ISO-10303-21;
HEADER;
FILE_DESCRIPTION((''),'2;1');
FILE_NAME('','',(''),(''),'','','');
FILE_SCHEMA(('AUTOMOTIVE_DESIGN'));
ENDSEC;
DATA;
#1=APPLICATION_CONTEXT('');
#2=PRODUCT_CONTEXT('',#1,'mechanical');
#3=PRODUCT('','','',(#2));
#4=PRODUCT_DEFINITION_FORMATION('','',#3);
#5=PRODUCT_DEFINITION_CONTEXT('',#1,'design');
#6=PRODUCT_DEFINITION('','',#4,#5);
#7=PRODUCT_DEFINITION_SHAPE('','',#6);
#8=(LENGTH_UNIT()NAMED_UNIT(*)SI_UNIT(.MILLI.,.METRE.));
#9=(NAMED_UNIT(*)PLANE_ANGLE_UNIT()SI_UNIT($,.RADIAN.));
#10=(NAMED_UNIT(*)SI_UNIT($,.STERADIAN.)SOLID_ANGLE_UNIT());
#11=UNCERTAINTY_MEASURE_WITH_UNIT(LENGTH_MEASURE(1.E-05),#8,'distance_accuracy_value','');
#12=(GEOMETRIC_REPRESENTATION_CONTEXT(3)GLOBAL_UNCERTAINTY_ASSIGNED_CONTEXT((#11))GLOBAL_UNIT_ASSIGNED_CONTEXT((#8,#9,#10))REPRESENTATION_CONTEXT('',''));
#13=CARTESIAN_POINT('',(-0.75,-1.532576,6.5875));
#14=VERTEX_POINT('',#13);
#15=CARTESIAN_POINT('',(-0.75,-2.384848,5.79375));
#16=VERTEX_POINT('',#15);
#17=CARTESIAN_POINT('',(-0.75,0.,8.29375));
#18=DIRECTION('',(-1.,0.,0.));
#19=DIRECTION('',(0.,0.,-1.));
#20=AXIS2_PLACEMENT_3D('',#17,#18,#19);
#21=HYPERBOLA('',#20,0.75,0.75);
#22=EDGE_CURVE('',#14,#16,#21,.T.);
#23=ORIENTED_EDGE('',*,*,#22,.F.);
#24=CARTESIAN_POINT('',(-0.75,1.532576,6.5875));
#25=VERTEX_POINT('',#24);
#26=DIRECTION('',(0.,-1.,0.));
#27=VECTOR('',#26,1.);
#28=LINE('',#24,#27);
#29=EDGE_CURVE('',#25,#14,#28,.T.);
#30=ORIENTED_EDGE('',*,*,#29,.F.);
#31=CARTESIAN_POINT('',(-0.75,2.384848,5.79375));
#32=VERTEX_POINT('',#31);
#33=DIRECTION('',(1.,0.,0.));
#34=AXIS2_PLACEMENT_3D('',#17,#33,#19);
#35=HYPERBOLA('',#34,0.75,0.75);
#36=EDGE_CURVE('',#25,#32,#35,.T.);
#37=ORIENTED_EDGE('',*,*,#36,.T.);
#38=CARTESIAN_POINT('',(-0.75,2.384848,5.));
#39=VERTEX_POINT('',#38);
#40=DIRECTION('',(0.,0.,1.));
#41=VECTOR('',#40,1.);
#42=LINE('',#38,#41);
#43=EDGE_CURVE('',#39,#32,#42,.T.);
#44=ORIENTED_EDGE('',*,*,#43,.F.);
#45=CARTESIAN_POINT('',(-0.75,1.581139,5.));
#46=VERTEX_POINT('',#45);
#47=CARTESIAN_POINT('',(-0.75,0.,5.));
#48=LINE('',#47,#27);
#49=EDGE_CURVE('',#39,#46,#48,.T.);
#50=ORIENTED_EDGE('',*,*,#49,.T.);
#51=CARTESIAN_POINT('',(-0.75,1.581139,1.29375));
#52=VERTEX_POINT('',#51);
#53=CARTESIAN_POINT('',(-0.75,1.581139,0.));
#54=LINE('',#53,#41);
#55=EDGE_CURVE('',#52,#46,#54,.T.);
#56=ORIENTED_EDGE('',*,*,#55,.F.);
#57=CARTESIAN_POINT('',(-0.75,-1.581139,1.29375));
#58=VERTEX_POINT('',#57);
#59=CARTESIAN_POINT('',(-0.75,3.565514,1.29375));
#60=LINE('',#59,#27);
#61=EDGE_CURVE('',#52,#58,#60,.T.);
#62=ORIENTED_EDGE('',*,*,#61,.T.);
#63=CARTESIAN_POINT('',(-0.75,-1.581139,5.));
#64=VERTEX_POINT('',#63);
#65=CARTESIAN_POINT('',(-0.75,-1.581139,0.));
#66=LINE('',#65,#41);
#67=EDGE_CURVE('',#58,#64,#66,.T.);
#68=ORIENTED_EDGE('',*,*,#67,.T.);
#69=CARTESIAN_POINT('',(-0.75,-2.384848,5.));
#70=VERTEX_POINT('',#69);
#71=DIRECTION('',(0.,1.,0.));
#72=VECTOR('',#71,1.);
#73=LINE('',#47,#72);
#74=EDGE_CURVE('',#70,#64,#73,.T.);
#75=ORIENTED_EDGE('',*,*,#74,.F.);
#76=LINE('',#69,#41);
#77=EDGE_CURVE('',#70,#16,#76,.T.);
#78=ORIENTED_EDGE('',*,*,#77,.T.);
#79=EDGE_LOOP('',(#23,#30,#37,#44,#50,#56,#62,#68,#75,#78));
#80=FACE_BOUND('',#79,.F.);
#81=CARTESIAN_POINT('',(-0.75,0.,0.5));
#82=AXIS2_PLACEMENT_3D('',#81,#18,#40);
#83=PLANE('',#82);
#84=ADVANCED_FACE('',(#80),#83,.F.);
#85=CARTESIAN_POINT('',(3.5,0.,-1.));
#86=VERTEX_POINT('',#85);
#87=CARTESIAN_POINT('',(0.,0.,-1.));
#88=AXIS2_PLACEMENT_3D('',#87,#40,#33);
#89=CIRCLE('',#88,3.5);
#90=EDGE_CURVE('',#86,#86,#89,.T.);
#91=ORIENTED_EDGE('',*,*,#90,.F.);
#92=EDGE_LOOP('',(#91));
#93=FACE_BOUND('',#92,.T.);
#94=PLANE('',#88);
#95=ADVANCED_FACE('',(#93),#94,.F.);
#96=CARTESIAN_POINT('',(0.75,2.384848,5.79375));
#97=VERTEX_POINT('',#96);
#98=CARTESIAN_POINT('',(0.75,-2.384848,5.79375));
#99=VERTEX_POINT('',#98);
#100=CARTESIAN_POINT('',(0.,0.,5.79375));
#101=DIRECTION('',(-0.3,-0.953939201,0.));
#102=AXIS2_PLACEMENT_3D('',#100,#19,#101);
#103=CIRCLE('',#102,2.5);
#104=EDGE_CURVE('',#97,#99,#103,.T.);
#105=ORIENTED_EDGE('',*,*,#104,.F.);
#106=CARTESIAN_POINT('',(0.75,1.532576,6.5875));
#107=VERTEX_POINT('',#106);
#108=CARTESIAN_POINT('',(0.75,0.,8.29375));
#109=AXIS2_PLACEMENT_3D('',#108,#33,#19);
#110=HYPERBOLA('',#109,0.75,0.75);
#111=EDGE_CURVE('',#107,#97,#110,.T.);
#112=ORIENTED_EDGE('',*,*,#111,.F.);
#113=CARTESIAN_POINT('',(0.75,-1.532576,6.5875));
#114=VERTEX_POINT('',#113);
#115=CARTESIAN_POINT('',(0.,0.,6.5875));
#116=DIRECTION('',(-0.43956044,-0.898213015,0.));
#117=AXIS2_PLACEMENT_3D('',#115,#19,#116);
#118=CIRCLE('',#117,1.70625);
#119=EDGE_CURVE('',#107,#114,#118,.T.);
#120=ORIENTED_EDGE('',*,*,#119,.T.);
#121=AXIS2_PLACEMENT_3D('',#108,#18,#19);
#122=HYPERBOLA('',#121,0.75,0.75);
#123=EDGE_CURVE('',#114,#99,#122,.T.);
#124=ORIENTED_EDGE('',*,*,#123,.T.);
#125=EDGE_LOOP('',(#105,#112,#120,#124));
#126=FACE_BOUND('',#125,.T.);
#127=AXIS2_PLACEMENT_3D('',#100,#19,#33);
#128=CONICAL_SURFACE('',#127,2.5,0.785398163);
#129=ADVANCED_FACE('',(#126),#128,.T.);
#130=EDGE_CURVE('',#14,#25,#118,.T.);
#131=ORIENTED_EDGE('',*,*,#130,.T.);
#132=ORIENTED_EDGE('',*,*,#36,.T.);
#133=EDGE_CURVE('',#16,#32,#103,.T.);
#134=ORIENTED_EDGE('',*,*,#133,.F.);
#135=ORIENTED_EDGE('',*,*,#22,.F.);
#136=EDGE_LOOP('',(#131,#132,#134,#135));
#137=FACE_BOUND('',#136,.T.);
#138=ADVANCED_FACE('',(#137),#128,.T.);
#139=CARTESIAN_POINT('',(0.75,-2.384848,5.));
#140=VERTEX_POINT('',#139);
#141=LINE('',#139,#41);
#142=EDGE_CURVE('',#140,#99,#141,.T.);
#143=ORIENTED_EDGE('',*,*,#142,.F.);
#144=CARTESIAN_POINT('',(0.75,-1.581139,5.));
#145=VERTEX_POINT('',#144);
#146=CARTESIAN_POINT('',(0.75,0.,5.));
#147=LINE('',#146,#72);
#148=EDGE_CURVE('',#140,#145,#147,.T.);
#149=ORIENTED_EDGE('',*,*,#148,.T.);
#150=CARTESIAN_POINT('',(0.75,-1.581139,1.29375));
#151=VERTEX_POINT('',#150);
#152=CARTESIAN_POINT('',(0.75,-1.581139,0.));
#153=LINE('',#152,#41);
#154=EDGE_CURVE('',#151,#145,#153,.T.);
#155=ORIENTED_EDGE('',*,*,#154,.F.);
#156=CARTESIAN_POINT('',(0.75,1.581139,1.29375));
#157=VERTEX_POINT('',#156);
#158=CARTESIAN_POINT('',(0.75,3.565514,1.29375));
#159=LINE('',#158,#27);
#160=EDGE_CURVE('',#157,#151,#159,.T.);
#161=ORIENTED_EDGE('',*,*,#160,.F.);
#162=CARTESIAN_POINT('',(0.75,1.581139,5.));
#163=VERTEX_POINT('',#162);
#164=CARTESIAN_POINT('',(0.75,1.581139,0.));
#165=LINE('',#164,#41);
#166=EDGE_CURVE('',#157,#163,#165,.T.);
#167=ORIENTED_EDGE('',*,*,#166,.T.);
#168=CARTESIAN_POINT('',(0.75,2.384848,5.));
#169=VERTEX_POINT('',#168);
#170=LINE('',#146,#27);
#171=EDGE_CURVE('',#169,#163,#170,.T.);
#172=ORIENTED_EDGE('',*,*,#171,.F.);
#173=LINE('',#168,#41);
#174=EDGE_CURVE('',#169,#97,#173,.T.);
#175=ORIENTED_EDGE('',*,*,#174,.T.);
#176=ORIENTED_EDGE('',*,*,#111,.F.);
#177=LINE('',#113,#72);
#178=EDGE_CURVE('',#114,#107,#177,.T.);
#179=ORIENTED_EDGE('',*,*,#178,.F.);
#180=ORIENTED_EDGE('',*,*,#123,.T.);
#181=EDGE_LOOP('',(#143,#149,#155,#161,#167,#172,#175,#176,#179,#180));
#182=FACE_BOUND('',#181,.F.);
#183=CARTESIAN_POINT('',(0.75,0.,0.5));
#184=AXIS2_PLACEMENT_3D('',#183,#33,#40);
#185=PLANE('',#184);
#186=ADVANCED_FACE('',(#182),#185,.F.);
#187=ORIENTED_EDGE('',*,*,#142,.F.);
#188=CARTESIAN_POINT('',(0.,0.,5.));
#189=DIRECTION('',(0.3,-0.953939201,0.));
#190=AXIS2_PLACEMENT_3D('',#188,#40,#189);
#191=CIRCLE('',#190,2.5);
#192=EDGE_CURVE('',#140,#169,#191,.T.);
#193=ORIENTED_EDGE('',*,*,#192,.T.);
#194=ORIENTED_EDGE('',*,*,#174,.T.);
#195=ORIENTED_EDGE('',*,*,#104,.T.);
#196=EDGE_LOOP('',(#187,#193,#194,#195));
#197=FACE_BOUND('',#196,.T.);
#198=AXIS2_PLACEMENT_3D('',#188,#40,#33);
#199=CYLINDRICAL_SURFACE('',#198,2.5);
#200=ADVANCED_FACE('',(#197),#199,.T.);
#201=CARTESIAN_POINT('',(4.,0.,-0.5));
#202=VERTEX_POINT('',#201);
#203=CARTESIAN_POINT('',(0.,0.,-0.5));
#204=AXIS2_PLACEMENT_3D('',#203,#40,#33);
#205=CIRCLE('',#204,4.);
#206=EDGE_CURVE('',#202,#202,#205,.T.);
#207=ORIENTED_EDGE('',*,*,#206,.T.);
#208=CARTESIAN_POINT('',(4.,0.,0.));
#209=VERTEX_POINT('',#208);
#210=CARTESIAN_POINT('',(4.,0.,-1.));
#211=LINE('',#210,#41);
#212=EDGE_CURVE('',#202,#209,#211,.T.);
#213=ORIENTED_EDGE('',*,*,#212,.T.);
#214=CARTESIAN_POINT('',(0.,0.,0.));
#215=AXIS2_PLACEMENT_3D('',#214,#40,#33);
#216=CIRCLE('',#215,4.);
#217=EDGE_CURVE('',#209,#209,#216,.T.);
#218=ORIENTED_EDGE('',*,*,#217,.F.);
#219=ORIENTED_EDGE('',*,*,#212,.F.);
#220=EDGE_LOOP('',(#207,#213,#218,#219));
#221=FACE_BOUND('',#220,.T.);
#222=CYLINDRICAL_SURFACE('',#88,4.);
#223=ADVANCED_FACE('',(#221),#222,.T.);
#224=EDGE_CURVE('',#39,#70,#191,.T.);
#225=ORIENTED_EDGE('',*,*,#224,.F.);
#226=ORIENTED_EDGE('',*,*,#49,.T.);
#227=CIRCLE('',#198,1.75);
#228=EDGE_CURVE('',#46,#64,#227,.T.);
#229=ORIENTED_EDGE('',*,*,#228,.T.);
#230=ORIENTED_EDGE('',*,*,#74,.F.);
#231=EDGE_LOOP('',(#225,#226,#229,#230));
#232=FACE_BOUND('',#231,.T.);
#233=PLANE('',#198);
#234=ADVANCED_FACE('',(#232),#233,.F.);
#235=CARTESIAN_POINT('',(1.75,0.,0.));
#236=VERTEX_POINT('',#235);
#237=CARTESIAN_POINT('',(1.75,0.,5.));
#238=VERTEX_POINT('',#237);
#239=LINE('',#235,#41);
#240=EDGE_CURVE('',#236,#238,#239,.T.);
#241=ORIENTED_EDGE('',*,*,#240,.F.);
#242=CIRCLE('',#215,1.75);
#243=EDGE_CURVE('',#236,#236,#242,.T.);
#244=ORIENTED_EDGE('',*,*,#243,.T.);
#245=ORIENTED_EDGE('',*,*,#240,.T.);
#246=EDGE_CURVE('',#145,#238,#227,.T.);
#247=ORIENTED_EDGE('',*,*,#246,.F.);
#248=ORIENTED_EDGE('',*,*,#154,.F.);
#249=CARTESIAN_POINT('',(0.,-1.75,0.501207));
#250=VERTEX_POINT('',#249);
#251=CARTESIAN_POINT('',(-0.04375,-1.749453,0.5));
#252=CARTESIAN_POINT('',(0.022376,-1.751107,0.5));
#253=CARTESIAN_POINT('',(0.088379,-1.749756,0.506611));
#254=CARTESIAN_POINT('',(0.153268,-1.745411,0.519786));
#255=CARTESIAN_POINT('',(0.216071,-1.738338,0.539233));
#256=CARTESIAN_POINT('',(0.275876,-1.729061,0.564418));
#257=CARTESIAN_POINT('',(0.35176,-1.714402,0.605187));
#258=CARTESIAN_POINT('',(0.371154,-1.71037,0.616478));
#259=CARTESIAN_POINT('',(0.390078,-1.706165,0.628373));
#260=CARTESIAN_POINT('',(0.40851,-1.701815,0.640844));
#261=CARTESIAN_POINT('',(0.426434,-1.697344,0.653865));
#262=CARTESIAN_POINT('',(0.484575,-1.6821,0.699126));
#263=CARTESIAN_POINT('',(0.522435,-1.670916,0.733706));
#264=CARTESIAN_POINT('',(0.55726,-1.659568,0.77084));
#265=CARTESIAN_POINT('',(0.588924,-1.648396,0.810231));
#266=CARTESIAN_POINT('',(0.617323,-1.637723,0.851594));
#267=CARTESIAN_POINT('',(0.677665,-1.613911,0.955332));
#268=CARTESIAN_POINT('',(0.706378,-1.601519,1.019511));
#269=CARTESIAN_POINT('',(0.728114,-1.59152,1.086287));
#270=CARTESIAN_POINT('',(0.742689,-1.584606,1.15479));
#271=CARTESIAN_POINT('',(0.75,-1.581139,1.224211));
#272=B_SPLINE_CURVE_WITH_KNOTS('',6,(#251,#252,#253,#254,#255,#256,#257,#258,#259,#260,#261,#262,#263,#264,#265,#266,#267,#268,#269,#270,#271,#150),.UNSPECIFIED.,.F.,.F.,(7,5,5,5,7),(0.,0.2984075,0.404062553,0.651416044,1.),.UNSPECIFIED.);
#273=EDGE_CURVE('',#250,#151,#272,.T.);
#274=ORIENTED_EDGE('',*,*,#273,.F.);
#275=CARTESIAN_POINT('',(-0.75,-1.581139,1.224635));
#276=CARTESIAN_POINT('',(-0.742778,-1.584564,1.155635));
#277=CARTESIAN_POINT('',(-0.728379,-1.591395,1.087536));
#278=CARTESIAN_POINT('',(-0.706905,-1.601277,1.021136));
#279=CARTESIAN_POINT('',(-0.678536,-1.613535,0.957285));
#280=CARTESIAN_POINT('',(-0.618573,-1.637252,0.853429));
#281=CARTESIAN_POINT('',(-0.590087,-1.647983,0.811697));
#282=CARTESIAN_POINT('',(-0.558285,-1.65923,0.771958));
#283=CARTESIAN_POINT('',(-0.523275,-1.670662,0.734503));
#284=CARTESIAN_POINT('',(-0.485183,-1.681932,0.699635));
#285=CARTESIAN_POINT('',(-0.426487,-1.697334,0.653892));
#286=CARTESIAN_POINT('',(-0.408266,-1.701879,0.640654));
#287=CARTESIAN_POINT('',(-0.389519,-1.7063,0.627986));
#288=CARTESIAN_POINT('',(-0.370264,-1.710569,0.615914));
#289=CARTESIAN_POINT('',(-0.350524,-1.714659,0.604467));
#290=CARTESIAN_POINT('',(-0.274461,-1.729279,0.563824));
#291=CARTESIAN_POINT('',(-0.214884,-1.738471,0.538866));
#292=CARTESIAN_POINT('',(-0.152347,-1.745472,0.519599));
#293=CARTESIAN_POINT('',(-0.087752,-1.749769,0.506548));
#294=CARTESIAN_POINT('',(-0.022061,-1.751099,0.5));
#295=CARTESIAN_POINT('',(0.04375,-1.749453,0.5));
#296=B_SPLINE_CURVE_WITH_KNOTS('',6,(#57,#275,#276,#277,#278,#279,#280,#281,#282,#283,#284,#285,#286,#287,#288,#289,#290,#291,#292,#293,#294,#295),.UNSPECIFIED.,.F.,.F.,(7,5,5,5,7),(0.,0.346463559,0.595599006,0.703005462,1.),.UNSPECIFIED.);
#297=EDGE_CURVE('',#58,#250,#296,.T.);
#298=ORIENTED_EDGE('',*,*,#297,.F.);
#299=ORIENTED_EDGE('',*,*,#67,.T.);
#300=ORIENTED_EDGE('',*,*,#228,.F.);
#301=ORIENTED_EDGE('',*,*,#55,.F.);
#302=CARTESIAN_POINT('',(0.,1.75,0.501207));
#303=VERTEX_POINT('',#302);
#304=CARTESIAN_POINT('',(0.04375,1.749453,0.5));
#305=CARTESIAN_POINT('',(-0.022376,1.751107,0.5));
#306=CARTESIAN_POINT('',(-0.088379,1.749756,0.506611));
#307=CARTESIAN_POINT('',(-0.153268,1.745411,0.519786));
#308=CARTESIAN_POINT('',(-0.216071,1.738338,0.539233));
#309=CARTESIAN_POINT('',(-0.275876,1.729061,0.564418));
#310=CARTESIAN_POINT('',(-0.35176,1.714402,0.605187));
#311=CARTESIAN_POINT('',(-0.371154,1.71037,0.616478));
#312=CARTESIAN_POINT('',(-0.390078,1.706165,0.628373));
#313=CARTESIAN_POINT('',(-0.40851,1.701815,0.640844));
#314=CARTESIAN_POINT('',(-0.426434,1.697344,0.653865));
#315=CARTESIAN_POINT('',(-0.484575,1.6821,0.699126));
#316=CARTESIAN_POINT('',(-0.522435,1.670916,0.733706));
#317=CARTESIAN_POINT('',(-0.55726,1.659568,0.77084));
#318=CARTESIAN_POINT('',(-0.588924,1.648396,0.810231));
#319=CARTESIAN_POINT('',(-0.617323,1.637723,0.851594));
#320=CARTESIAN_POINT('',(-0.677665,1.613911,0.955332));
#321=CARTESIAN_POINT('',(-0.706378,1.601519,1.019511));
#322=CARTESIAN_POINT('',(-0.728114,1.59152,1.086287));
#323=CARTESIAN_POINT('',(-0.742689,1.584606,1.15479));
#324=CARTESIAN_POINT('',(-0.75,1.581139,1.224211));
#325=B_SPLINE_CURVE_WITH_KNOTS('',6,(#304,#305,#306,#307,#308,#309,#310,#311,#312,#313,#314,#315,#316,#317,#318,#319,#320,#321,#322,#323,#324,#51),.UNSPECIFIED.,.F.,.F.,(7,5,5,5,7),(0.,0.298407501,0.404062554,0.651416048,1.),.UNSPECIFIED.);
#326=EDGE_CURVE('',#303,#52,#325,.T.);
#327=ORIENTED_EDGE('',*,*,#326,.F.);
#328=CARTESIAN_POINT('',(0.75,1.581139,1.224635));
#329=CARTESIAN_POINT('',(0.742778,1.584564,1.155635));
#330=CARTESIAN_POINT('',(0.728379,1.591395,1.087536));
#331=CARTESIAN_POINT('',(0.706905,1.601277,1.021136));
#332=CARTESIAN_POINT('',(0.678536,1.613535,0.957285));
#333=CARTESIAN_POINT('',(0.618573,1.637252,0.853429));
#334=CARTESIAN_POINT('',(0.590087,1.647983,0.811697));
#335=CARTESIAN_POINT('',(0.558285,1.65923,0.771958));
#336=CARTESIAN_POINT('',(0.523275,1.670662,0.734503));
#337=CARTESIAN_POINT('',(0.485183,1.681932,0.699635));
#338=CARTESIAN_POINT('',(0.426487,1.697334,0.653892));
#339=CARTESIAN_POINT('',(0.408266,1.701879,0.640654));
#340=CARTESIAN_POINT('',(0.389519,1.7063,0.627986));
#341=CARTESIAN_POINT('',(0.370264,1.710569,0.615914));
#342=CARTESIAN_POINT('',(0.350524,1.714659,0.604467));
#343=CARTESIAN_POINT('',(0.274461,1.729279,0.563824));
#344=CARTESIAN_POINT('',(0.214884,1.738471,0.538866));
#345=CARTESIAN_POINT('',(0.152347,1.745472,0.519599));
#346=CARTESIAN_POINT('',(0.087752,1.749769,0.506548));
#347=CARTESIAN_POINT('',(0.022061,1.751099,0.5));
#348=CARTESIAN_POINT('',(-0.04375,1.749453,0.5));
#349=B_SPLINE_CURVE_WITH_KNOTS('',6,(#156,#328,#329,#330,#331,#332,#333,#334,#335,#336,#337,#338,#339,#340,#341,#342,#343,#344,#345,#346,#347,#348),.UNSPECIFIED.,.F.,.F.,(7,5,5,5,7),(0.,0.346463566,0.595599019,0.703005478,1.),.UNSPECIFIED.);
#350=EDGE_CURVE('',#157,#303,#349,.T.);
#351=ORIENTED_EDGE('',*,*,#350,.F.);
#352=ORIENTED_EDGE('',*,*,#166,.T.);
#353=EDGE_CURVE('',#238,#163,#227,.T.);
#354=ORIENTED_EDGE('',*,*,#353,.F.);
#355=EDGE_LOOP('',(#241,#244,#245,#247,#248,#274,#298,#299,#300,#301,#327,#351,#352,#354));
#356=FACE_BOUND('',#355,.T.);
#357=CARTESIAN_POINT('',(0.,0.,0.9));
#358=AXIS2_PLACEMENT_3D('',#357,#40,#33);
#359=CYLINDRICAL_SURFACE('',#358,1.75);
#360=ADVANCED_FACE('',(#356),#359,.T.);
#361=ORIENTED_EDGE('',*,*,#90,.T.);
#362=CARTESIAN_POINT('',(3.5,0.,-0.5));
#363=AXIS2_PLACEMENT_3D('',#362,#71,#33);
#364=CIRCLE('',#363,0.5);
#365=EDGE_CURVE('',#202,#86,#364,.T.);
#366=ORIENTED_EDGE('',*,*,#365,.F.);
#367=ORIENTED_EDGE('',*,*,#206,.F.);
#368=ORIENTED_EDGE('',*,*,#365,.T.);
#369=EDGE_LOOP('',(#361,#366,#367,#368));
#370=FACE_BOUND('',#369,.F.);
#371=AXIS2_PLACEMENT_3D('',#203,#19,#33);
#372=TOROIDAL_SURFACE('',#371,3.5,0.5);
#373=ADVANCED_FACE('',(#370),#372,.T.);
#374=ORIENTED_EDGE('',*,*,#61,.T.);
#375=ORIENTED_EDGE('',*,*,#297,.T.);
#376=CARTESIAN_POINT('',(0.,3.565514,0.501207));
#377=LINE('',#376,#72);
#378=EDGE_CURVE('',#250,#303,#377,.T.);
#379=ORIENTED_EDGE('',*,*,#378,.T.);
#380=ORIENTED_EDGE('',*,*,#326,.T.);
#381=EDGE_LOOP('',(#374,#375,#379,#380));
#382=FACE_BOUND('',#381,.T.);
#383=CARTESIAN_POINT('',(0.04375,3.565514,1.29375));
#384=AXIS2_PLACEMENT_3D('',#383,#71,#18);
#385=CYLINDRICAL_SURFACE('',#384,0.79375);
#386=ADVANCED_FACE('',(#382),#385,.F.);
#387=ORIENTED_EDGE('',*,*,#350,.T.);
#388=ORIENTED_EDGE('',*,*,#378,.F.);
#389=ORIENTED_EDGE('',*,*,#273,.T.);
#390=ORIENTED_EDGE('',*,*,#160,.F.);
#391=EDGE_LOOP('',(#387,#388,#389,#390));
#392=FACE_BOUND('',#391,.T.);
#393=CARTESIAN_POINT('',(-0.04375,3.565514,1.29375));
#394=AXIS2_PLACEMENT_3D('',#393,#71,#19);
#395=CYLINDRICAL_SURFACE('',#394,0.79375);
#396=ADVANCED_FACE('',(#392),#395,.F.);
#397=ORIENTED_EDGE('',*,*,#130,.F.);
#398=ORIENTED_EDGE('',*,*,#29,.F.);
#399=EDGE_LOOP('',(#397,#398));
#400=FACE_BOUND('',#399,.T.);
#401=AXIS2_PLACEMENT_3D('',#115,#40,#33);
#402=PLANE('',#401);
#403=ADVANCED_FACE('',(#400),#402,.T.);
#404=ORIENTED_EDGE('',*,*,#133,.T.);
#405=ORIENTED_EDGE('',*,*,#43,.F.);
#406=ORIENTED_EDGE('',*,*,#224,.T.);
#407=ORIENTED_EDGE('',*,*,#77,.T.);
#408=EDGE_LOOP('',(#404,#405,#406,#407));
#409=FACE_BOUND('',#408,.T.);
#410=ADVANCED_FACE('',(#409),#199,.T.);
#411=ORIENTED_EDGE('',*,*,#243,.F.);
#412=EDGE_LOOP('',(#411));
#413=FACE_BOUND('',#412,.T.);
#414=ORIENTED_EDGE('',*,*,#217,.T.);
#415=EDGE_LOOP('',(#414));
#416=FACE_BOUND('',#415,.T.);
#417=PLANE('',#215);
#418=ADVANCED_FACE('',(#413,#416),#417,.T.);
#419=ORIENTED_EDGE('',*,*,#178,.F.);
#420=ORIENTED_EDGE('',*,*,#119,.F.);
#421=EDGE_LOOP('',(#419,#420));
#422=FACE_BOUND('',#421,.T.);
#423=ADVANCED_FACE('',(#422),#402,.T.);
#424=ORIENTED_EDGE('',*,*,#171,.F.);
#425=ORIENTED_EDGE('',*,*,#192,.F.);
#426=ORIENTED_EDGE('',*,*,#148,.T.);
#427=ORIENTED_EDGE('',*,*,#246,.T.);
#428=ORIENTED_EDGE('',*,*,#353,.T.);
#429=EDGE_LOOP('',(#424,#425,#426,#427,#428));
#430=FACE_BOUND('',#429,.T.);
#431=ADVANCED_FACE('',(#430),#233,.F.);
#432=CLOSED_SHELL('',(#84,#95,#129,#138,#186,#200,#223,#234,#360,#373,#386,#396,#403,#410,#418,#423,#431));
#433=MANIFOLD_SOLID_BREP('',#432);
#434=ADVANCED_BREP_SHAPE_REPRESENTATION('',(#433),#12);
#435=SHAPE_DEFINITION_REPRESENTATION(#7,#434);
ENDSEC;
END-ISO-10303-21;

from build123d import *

# Parameters (mm, degrees)
F2_SIZE       = 0.79375
F3_W          = 1.5
F3_H          = 6.0875
F4_DEPTH      = 4.001
F4_DEPTH_BACK = 4.001
F5_T4_DEPTH   = 7.1310276602
F5_S5_R       = 1.75
F5_T6_DEPTH   = 5
F5_T10_DEPTH  = 7.1310276602
F5_S11_R      = 1.75
F5_T12_DEPTH  = 5
F6_R          = 0.5


# Not quite as in the source:
# - a fillet or chamfer that OpenCascade refuses, or shapes differently, is made with other operations: its cross-section is extruded or revolved along the edge and cut away or added


with BuildPart() as f1:
    # F0 (on Front) → F1 (revolve)
    with BuildSketch(Plane.XZ):
        Polygon((4, 0), (1.75, 0), (1.75, 5), (2.5, 5), (2.5, 6.5875), (0, 6.5875), (0, 5), (0, 0), (0, -1), (4, -1), align=None)
    revolve(axis=Axis((0, 0, 2.5), (0, 0, 1)))

    # F2
    f2_edges = [f1.edges().sort_by_distance(p)[0] for p in [
        (-2.5, 0, 6.5875),
    ]]
    chamfer(f2_edges, length=F2_SIZE)

    # F3 (on Front) → F4 (cut, two sides)
    with BuildSketch(Plane.XZ) as f4_sk:
        with Locations((0, 3.54375)):
            Rectangle(F3_W, F3_H)
    extrude(amount=F4_DEPTH, mode=Mode.SUBTRACT)
    extrude(f4_sk.sketch, amount=-F4_DEPTH_BACK, mode=Mode.SUBTRACT)

    # F5: fillet of radius 0.79375 on 2 edges, made by hand


with BuildPart() as f5_tool2:
    # F5_s3 → F5_t4 (new body)
    with BuildSketch(Plane.XZ.offset(-3.5655138301)):
        with BuildLine():
            ThreePointArc((-0.04375, 0.5), (0.5175160076, 0.7324839924), (0.75, 1.29375))
            Line((0.75, 1.29375), (0.75, 0.5))
            Line((0.75, 0.5), (-0.04375, 0.5))
        make_face()
    extrude(amount=F5_T4_DEPTH)

    # F5_s5 → F5_t6 (intersect, symmetric)
    with BuildSketch(Plane.XY.offset(0.9)):
        Circle(F5_S5_R)
    extrude(amount=F5_T6_DEPTH, both=True, mode=Mode.INTERSECT)


with BuildPart() as f1_1:
    add(f1.part)

    # F5_t1: union F5_tool2
    add(f5_tool2.part)


with BuildPart() as f5_tool8:
    # F5_s9 → F5_t10 (new body)
    with BuildSketch(Plane.XZ.offset(-3.5655138301)):
        with BuildLine():
            ThreePointArc((-0.75, 1.29375), (-0.5175160076, 0.7324839924), (0.04375, 0.5))
            Line((0.04375, 0.5), (-0.75, 0.5))
            Line((-0.75, 0.5), (-0.75, 1.29375))
        make_face()
    extrude(amount=F5_T10_DEPTH)

    # F5_s11 → F5_t12 (intersect, symmetric)
    with BuildSketch(Plane.XY.offset(0.9)):
        Circle(F5_S11_R)
    extrude(amount=F5_T12_DEPTH, both=True, mode=Mode.INTERSECT)


with BuildPart() as f1_2:
    add(f1_1.part)

    # F5_t7: union F5_tool8
    add(f5_tool8.part)

    # F6
    f6_edges = [f1_2.edges().sort_by_distance(p)[0] for p in [
        (-4, 0, -1),
    ]]
    fillet(f6_edges, radius=F6_R)


solid = f1_2.part
